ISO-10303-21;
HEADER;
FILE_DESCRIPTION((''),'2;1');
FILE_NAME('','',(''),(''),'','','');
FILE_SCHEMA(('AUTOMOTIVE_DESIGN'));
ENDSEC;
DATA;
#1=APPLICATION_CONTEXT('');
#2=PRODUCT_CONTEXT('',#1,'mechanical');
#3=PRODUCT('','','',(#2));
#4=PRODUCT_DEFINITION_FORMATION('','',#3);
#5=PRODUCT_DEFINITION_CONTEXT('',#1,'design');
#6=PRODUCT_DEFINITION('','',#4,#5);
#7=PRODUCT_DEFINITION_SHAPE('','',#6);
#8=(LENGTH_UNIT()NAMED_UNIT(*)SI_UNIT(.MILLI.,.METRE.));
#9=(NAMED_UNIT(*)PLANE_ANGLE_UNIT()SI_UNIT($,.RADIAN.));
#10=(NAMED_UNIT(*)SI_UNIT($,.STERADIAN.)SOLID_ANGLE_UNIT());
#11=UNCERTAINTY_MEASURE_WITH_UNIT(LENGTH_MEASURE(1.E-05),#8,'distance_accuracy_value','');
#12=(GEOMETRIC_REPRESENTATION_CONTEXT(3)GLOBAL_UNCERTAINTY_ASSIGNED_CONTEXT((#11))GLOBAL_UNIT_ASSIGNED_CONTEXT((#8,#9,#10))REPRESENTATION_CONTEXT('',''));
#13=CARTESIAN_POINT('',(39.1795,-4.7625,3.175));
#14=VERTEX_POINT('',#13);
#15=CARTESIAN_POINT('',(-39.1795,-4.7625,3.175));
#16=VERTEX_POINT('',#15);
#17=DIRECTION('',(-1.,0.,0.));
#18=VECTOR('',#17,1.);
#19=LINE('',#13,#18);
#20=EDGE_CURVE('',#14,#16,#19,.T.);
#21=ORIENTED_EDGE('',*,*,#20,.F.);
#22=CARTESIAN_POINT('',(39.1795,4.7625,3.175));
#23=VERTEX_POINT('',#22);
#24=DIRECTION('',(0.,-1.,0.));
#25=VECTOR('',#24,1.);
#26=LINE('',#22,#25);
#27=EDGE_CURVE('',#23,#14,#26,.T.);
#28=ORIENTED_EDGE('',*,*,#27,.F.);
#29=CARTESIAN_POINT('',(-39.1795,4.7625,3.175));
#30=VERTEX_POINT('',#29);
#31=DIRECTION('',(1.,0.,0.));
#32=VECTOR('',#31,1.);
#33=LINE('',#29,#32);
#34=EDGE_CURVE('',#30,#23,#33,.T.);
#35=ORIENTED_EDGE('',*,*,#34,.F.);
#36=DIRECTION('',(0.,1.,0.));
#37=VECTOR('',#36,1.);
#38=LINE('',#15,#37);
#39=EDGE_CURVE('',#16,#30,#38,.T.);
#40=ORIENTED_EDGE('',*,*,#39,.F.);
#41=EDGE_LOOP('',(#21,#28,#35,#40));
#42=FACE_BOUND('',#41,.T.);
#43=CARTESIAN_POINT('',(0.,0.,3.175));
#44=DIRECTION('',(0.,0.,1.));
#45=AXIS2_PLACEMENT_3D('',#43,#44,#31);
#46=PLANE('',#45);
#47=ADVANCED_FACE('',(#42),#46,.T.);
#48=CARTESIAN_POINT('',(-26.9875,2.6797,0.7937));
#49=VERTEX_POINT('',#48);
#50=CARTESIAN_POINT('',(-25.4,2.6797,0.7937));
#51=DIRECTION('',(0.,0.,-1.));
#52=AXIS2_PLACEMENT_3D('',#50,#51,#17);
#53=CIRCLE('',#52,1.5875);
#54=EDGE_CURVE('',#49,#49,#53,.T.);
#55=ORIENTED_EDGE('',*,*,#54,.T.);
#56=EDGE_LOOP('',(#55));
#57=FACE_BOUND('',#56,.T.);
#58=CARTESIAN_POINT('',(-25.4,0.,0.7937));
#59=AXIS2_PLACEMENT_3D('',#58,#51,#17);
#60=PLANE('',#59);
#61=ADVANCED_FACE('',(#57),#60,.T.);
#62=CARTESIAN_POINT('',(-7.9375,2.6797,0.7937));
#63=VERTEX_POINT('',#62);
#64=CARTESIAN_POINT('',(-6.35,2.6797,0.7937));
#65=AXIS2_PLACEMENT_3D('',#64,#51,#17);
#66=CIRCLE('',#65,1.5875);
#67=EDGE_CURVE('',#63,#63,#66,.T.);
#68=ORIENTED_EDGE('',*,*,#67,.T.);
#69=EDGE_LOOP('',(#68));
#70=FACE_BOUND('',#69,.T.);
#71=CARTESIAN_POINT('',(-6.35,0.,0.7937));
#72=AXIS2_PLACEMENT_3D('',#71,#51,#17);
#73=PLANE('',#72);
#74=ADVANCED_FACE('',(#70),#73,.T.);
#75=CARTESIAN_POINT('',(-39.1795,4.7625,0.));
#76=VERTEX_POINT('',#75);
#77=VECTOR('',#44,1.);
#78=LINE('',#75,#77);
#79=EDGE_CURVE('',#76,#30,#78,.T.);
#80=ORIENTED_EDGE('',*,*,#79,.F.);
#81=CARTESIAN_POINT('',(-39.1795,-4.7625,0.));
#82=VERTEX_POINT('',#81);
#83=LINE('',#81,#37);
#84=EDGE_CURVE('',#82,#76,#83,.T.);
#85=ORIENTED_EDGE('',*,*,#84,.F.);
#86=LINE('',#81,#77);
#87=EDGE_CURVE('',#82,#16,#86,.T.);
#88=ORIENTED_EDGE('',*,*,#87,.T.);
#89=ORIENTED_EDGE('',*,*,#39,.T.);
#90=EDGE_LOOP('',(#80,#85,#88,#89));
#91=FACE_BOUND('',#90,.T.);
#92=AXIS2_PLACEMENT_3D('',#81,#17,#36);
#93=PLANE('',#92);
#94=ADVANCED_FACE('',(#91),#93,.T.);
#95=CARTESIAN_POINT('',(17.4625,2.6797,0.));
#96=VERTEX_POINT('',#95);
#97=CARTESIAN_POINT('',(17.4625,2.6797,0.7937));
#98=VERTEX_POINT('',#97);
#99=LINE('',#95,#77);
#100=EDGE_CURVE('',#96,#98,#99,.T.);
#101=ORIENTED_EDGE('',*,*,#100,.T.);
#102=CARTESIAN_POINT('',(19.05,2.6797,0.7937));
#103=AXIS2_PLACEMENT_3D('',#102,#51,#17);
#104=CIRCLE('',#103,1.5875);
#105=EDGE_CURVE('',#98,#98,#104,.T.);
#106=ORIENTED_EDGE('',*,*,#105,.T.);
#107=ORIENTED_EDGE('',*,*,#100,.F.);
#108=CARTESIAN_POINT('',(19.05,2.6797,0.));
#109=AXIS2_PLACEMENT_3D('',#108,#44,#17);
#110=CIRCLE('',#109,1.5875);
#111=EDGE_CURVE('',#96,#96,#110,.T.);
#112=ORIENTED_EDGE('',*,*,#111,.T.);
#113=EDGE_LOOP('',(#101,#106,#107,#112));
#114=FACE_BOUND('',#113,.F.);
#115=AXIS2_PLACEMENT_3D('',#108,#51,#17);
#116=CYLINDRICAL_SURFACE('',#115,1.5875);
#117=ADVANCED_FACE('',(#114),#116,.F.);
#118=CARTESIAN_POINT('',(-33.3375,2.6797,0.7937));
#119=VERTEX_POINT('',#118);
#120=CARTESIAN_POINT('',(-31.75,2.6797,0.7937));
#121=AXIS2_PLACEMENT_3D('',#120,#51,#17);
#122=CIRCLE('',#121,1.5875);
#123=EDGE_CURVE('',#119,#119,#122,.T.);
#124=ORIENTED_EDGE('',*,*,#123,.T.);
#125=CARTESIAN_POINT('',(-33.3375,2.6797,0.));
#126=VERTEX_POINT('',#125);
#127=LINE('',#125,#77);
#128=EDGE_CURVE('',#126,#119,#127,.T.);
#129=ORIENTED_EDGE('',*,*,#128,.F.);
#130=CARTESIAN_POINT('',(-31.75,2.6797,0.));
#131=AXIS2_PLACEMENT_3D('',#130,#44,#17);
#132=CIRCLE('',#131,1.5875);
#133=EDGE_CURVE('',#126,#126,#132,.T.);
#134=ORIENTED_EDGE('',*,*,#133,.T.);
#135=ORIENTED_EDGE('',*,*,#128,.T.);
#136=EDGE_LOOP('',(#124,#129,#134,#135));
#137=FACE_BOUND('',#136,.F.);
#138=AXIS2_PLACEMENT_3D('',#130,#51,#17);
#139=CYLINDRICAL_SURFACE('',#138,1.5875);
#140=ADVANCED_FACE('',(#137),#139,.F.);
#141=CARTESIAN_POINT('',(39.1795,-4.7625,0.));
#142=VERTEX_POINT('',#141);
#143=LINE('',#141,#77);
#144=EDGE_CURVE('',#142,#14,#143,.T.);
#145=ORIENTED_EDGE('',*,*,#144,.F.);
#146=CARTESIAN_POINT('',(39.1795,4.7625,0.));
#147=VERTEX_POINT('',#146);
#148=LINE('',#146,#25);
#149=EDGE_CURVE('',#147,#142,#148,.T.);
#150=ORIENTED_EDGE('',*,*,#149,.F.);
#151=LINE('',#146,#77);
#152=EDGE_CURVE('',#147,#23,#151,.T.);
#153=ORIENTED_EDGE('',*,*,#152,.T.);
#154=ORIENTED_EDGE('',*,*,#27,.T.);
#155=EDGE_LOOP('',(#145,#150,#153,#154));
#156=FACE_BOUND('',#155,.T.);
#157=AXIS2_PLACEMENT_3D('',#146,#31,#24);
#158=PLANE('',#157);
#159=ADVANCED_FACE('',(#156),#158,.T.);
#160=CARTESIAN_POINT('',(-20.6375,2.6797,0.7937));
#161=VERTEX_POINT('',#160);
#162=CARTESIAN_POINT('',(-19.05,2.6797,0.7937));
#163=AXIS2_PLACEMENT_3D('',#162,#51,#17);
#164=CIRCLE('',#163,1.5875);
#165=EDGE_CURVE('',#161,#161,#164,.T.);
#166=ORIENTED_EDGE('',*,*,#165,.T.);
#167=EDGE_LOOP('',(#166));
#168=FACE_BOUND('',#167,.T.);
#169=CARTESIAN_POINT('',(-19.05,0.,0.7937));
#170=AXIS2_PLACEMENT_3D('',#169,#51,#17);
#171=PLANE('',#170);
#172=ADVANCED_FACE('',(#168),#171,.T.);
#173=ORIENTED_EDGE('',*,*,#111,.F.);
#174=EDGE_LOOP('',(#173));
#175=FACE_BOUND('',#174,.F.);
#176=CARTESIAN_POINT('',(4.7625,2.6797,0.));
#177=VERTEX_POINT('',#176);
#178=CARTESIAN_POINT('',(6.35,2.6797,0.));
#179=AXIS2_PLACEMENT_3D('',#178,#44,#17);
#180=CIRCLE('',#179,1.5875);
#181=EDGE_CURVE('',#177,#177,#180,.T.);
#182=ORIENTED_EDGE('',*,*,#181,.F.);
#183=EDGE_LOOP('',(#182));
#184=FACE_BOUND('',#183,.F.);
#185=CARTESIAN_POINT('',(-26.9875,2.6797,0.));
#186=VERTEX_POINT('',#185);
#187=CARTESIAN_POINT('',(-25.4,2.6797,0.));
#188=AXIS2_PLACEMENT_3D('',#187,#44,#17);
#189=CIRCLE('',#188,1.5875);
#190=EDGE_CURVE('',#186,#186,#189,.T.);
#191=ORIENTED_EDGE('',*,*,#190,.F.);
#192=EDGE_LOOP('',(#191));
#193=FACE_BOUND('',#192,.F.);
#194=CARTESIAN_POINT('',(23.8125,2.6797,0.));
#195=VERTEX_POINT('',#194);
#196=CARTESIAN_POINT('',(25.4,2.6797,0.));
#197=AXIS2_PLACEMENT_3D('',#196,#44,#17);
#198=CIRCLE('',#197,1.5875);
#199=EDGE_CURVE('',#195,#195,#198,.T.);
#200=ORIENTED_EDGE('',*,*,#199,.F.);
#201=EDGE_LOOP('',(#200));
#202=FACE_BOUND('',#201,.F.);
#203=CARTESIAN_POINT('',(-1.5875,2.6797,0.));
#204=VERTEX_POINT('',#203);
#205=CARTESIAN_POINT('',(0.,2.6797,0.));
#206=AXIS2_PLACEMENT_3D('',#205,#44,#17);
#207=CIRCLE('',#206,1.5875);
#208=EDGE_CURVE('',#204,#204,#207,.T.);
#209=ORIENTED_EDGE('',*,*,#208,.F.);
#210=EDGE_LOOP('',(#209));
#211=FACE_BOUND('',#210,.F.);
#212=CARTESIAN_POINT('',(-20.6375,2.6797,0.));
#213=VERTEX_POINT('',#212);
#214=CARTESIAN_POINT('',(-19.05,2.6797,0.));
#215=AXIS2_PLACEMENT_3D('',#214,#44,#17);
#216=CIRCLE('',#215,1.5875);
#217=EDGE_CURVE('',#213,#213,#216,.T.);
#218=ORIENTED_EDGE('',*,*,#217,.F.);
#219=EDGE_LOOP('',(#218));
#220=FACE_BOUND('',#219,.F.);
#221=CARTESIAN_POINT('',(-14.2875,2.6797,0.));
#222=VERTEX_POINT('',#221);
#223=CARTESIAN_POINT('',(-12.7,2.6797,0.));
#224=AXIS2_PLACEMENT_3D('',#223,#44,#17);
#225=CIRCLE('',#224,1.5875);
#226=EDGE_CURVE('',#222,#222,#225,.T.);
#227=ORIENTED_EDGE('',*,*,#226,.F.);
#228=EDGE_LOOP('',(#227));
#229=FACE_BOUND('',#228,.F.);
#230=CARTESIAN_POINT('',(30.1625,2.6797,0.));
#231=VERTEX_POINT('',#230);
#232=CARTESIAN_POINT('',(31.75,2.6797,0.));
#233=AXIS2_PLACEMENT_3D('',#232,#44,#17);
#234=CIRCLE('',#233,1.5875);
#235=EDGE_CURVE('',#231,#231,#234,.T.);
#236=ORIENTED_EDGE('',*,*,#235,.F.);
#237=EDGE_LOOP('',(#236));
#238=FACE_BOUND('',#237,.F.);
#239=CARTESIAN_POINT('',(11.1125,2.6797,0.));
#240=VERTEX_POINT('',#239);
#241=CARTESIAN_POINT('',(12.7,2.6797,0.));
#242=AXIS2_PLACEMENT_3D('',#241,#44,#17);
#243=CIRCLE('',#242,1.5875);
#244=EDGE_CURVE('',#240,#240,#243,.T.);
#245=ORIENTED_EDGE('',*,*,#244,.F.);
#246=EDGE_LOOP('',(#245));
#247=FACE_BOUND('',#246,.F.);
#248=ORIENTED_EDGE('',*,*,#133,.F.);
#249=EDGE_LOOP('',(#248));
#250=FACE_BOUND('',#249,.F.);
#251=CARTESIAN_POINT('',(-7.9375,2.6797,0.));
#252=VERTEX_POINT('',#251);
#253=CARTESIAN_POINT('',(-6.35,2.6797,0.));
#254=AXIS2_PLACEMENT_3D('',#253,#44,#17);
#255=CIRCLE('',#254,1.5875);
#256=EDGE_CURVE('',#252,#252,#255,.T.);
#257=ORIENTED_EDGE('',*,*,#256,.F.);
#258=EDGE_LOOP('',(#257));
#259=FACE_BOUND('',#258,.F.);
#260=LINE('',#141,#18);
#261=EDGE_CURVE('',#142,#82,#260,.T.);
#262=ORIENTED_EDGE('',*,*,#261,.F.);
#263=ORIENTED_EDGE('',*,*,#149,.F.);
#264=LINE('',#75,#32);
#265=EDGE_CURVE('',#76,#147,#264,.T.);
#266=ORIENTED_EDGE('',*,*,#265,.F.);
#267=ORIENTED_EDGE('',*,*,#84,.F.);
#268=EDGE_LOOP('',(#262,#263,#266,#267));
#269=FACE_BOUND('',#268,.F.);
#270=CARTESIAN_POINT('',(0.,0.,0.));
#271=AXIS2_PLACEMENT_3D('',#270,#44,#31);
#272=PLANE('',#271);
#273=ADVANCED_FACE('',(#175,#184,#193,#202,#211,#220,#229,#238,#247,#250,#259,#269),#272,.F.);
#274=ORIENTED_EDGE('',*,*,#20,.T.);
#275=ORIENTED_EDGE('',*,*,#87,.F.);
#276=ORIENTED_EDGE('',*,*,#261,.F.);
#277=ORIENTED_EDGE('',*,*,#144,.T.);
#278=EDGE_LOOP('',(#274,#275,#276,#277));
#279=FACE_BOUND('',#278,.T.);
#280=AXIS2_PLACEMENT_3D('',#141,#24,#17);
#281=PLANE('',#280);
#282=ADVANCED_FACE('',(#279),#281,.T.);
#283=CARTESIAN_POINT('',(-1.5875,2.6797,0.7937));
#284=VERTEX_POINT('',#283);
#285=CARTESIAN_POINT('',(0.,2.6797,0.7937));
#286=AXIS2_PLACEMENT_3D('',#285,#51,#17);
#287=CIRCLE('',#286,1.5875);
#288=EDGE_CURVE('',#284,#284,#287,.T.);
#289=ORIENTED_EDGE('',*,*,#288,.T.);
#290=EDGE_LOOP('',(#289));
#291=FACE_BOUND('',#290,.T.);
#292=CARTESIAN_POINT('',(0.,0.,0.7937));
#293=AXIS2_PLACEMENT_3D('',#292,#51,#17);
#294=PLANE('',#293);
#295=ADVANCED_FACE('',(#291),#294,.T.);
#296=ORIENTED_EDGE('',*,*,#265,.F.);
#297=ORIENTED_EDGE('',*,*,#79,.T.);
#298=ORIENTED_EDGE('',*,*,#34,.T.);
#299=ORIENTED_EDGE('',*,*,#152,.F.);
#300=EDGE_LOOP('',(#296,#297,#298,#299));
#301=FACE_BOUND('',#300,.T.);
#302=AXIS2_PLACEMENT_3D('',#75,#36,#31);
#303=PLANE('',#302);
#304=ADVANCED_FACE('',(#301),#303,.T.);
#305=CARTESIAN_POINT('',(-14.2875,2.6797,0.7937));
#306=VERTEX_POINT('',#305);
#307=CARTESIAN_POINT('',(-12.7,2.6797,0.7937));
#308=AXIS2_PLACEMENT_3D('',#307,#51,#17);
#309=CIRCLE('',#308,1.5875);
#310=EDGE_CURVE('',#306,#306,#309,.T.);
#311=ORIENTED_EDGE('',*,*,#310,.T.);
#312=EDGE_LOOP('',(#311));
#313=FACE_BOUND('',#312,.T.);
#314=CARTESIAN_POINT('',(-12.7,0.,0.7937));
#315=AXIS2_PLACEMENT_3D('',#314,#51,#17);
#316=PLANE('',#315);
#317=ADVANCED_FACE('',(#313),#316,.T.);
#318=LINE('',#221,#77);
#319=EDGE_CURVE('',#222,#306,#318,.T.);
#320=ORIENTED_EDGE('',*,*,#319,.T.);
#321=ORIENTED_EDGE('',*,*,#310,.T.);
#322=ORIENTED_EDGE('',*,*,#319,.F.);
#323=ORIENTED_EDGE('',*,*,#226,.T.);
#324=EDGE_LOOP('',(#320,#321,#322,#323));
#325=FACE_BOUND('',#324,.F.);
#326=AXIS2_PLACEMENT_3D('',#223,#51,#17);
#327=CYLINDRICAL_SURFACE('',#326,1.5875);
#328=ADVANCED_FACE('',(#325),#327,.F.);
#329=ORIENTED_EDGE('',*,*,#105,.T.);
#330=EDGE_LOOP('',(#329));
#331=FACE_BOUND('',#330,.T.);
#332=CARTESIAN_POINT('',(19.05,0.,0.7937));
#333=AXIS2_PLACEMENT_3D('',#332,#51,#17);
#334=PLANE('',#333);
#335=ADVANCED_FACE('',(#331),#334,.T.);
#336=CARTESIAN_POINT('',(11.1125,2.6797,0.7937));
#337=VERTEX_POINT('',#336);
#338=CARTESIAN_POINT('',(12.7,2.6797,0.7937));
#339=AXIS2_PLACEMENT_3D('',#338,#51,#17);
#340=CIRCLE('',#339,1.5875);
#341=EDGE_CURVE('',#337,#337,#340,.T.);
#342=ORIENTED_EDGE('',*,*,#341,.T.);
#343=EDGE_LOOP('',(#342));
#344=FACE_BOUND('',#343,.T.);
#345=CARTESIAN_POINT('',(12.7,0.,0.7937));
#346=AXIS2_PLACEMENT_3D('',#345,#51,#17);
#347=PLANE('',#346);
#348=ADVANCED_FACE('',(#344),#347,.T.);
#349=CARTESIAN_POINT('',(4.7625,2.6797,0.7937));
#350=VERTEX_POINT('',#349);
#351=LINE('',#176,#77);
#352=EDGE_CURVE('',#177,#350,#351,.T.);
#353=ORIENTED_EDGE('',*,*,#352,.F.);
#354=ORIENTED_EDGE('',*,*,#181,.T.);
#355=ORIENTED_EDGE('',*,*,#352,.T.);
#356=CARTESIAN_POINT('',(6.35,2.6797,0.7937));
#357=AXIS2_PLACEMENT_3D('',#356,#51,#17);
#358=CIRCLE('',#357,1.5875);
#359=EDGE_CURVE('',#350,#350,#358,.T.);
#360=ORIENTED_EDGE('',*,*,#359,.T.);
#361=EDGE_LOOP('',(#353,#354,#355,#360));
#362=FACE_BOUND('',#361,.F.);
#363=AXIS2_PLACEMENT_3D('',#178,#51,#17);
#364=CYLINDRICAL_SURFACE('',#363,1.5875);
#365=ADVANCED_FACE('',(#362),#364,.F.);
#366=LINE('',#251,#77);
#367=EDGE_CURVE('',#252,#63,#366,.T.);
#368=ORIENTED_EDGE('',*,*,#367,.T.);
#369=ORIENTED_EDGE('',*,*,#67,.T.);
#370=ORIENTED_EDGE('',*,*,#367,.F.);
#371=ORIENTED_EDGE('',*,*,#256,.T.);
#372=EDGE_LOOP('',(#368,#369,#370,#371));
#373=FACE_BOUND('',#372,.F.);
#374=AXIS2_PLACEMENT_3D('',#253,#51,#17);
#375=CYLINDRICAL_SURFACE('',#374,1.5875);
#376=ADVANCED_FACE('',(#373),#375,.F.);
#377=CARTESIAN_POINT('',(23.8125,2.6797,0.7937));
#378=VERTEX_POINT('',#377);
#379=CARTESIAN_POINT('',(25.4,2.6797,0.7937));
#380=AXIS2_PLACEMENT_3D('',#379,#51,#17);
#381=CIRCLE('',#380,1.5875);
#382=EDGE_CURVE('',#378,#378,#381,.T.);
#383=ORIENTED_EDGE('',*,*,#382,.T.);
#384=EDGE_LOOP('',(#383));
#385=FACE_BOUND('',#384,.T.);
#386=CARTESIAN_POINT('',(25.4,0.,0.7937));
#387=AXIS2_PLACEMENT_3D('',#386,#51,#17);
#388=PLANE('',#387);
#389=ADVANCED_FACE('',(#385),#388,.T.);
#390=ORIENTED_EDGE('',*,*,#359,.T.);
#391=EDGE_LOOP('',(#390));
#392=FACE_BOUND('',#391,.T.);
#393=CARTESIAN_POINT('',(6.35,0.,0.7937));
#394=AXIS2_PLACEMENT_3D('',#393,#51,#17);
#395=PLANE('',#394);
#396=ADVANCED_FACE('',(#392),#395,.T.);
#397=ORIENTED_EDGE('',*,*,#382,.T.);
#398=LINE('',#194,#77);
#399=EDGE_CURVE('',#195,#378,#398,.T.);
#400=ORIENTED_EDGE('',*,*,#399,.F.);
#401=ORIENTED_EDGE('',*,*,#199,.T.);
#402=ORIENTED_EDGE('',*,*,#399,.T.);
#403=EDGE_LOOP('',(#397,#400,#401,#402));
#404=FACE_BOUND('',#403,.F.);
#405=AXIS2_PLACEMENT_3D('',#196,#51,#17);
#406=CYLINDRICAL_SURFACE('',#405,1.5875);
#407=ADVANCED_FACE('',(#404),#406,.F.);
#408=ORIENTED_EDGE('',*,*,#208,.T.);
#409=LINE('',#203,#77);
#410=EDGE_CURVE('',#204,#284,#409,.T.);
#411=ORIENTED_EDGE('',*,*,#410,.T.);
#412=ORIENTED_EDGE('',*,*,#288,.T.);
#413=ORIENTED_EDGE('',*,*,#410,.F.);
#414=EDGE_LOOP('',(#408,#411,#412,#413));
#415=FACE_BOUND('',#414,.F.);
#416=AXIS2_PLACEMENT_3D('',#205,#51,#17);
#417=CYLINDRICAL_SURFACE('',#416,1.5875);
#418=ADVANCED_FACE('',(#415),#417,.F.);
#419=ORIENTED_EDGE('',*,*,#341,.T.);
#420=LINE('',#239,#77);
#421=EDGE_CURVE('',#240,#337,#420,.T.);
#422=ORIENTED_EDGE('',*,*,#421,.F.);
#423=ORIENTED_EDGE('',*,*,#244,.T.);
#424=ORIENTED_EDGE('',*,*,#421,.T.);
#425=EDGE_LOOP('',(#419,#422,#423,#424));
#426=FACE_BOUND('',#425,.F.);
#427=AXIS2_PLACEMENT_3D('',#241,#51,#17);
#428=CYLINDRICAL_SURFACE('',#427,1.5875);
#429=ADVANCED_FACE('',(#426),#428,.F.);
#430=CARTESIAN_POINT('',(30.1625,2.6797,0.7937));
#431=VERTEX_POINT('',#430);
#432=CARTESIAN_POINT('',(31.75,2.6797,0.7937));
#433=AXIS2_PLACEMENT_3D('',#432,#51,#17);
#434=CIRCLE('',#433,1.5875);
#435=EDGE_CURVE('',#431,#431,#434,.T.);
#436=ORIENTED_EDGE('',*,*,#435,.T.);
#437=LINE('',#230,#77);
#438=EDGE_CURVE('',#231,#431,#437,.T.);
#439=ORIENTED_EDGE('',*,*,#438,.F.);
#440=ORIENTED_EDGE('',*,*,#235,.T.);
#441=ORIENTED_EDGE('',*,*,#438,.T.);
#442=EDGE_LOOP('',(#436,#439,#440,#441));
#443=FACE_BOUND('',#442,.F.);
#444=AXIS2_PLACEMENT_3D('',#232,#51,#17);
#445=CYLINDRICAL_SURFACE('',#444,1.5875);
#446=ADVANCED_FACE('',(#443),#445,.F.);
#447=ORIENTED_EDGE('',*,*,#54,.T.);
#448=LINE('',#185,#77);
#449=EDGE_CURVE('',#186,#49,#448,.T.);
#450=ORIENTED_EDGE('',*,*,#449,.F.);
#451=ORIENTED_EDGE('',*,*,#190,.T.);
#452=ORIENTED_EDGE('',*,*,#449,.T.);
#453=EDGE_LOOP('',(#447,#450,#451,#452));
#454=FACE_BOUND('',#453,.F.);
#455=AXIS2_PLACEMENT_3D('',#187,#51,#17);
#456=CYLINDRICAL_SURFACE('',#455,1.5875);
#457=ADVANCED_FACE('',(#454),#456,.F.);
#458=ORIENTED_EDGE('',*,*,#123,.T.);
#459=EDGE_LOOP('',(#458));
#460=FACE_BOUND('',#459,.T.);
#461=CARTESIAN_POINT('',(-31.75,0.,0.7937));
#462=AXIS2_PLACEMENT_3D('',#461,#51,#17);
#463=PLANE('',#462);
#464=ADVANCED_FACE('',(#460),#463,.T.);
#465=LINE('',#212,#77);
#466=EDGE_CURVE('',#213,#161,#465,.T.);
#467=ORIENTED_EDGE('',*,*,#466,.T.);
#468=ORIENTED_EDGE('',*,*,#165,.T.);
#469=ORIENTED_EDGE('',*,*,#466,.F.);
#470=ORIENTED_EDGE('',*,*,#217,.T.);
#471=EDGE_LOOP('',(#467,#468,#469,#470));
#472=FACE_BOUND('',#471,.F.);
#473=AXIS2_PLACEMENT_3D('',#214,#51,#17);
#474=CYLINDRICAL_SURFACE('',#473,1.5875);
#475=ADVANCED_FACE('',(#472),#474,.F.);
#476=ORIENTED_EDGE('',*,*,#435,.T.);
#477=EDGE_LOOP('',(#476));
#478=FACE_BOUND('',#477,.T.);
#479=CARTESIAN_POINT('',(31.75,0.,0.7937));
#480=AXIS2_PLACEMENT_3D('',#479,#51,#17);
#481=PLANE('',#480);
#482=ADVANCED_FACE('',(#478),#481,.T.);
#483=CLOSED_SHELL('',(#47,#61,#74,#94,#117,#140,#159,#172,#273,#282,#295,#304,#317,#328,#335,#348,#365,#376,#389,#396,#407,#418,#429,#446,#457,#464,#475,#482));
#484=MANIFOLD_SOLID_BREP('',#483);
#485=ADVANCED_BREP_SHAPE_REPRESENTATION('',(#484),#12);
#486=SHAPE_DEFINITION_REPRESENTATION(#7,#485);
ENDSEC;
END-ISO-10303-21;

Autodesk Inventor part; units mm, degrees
ref_plane "YZ Plane" through (0, 0, 0) normal (1, 0, 0) x (0, 1, 0)
ref_plane "XZ Plane" through (0, 0, 0) normal (0, 1, 0) x (-1, 0, 0)
ref_plane "XY Plane" through (0, 0, 0) normal (0, 0, 1) x (1, 0, 0)
sketch "Sketch1" plane through (0, 0, 0) normal (0, 0, 1) x (1, 0, 0)
  line L0 (-39.1795, 4.7625) -> (39.1795, 4.7625)
  line L1 (39.1795, 4.7625) -> (39.1795, -4.7625)
  line L2 (39.1795, -4.7625) -> (-39.1795, -4.7625)
  line L3 (-39.1795, -4.7625) -> (-39.1795, 4.7625)
  line L4 (-39.1795, 4.7625) -> (39.1795, -4.7625) construction
  line L5 (39.1795, 4.7625) -> (-39.1795, -4.7625) construction
  point P0 (0, 0)
  dimension "d0" = 78.359
  dimension "d1" = 9.525
extrude "Extrusion1" add sketch "Sketch1" along normal blind 3.175
sketch "Sketch2" plane through (0, 0, 0) normal (0, 0, -1) x (-1, 0, 0)
  line L0 (-54.8513, 0) -> (54.8513, 0) projected
  line L1 (0, -6.6675) -> (0, 6.6675) projected
  line L2 (39.1795, -4.7625) -> (-39.1795, -4.7625) projected
  line L3 (39.1795, 4.7625) -> (39.1795, -4.7625) projected
  line L4 (-39.1795, 4.7625) -> (39.1795, 4.7625) projected
  line L5 (-39.1795, -4.7625) -> (-39.1795, 4.7625) projected
  circle A0 centre (0, 2.6797) radius 1.5875
  point P0 (0, 0)
  dimension "d4" = 3.175
  dimension "d5" = 2.0828
extrude "Extrusion2" cut sketch "Sketch2" against normal blind 0.7937 contours A0 L1 | L1 A0
pattern_linear "Rectangular Pattern1" count 11 spacing 6.35 along (1, 0, 0) of "Extrusion2" first direction both ways yes
equation "\"BendRadius\" = Thickness"
equation "\"BendReliefWidth\" = Thickness"
equation "\"BendReliefDepth\" = 0.5 * Thickness"
equation "\"CornerReliefSize\" = 4 * Thickness"
equation "\"MinimumRemnant\" = 2 * Thickness"
equation "\"TransitionRadius\" = BendRadius"
equation "\"JacobiRadiusSize\" = BendRadius"
equation "\"GapSize\" = Thickness"
equation "\"Thickness\" = 3.048"
properties part number "PrintHeadLoadPlate"
